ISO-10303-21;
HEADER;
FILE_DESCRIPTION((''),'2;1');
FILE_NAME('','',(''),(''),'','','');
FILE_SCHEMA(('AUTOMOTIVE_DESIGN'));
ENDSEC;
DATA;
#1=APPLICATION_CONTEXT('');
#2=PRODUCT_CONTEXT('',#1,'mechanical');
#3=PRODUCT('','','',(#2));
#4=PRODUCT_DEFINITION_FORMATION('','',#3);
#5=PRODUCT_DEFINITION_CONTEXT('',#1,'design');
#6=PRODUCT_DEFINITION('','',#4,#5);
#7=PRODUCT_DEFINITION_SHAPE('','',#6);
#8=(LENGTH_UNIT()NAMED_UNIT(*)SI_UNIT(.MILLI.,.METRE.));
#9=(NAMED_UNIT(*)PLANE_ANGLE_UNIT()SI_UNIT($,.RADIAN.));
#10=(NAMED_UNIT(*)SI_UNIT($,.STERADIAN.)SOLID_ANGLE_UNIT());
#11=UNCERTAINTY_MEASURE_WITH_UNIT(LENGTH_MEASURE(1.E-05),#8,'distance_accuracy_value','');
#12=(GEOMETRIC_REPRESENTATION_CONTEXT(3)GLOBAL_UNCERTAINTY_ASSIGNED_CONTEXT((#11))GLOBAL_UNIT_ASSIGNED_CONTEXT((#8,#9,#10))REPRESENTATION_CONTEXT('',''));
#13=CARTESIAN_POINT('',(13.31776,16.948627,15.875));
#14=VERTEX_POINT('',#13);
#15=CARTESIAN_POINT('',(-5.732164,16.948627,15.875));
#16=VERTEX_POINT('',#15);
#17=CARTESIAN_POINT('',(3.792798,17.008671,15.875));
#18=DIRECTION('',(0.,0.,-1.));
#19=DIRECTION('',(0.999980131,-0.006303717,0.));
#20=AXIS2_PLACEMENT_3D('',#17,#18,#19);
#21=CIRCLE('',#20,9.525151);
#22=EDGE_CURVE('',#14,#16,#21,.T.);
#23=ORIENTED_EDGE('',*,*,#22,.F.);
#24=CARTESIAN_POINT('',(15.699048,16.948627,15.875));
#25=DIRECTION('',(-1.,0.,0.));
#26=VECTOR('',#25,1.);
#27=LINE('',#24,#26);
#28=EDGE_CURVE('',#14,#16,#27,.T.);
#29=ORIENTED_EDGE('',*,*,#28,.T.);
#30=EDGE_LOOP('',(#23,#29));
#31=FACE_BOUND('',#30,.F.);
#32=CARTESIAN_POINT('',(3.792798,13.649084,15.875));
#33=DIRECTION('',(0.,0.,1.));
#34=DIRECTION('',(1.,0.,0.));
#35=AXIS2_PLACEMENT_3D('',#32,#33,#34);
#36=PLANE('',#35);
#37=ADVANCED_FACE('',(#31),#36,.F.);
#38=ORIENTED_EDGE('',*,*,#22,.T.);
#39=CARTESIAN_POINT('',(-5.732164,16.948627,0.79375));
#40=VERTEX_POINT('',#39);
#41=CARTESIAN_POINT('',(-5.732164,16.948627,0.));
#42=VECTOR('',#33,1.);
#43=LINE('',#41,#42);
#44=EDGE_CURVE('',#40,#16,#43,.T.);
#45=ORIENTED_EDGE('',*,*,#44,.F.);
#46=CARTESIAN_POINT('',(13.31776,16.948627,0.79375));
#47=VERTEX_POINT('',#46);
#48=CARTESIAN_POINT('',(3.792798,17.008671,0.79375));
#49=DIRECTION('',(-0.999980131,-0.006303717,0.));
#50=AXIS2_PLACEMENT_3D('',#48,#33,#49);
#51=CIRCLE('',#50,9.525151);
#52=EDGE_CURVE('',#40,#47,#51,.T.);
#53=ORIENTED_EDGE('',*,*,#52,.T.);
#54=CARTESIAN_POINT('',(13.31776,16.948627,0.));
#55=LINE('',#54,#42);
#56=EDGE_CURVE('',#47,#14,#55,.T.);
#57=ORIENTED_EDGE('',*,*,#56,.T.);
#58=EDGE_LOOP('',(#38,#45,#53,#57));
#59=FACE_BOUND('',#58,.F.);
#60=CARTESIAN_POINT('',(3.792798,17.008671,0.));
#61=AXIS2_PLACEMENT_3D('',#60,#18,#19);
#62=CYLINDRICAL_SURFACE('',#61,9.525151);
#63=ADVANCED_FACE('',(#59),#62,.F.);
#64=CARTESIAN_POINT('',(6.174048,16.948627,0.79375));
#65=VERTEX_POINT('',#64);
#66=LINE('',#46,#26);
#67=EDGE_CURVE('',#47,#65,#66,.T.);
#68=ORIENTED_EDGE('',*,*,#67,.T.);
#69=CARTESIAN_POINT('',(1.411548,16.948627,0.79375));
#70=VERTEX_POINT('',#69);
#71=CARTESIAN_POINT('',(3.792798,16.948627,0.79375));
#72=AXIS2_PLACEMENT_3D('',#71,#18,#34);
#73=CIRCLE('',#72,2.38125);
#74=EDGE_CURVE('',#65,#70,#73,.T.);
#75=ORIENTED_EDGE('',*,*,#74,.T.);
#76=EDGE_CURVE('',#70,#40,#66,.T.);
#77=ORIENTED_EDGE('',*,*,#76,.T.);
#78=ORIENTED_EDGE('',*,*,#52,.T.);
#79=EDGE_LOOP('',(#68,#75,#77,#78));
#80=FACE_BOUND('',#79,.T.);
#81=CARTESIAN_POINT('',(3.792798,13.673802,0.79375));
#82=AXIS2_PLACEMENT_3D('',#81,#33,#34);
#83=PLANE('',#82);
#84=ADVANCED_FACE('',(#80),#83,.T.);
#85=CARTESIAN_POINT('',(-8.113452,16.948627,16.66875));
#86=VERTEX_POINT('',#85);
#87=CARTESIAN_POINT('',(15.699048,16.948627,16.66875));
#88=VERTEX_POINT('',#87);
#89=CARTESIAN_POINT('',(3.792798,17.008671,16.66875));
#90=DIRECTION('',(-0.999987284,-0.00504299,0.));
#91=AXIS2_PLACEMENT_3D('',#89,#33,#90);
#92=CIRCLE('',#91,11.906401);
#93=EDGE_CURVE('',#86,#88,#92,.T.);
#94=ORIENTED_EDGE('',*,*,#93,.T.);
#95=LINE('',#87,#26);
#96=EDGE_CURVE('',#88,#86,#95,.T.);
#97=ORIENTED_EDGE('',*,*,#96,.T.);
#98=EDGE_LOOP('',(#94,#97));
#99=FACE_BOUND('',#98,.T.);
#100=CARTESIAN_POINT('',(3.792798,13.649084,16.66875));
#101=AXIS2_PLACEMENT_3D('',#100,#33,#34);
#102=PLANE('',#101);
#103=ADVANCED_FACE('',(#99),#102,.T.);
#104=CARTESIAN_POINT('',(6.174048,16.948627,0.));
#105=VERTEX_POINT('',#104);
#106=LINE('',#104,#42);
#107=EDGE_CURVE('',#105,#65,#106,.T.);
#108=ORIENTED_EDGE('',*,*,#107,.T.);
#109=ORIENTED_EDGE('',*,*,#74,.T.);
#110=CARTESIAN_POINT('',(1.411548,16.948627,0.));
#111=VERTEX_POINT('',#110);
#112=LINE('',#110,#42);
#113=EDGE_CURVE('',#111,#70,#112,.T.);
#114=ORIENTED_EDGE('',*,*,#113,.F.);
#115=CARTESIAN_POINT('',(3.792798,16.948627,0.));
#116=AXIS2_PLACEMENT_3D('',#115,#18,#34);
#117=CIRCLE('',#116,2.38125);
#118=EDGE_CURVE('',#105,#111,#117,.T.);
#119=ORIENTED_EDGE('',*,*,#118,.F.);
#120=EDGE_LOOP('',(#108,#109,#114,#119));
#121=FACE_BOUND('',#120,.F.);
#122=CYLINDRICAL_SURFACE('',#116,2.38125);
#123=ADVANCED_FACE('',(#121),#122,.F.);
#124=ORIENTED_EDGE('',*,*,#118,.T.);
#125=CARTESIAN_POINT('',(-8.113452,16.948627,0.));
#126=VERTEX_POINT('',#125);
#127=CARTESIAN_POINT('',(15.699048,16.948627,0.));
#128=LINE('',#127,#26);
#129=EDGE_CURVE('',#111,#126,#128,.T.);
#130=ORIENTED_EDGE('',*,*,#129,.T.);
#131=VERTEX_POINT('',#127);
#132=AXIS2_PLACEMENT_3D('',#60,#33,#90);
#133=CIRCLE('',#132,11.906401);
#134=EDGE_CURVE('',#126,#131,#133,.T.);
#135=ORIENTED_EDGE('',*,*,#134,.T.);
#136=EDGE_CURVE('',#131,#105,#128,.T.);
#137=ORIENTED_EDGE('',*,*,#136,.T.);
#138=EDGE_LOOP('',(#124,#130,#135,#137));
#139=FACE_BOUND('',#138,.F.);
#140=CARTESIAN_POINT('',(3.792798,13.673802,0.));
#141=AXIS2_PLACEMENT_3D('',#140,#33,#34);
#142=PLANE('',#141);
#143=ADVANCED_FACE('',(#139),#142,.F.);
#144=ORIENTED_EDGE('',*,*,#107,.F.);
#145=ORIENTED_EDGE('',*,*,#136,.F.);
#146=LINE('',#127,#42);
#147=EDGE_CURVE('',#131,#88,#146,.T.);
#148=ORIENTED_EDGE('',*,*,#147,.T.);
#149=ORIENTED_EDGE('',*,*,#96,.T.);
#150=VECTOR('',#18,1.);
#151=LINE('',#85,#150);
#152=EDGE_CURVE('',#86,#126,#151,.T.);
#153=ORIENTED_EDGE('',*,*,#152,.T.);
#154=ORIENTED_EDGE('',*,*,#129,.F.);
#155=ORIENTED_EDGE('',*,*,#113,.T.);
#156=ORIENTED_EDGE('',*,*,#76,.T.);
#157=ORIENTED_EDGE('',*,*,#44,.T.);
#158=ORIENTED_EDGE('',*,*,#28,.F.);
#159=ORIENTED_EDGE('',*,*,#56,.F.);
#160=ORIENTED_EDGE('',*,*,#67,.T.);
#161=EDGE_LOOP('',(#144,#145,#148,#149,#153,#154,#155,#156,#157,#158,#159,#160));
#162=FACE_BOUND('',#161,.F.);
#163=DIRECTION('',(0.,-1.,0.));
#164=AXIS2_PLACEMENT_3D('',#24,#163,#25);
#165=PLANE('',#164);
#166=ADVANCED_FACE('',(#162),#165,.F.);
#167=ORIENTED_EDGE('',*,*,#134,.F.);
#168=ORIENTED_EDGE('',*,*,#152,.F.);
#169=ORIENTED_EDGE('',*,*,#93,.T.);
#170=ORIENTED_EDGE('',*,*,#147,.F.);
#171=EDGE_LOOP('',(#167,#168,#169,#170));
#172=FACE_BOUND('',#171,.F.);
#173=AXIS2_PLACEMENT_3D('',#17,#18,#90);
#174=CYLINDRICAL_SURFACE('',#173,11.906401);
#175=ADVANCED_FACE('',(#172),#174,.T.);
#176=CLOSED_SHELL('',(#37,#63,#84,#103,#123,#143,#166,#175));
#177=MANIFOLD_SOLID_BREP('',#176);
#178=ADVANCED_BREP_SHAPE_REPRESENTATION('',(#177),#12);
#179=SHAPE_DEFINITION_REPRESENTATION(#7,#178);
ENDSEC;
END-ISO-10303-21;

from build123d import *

# Parameters (mm, degrees)
F1_DEPTH = 15.875
F2_DEPTH = 0.79375
F4_DEPTH = 0.79375
F6_DEPTH = 5.08


# Not quite as in the source:
# - a length typed as a fraction of an inch, garbled in the dataset ("3 / 203.2 mm" for 3/8 in), is restored


with BuildPart() as f1:
    # F0 (on Top) → F1 (new body)
    with BuildSketch(Plane.XY):
        with BuildLine():
            Line((-5.732164003, 16.9486273388), (-8.1134518534, 16.9486273388))
            ThreePointArc((-8.1134518534, 16.9486273388), (3.7927981466, 5.1022697967), (15.6990481466, 16.9486273388))
            Line((15.6990481466, 16.9486273388), (13.3177602962, 16.9486273388))
            ThreePointArc((13.3177602962, 16.9486273388), (3.7927981466, 7.4835197967), (-5.732164003, 16.9486273388))
        make_face()
    extrude(amount=F1_DEPTH)

    # F0 (on Top) → F2 (join)
    with BuildSketch(Plane.XY):
        with BuildLine():
            Line((13.3177602962, 16.9486273388), (-5.732164003, 16.9486273388))
            ThreePointArc((-5.732164003, 16.9486273388), (3.7927981466, 7.4835197967), (13.3177602962, 16.9486273388))
        make_face()
    extrude(amount=F2_DEPTH)

    # F3 (on face) → F4 (join)
    with BuildSketch(Plane.XY.offset(15.875)):
        with BuildLine():
            Line((13.3177602962, 16.9486273388), (-5.732164003, 16.9486273388))
            ThreePointArc((-5.732164003, 16.9486273388), (3.7927981466, 7.4236651892), (13.3177602962, 16.9486273388))
        make_face()
        with BuildLine():
            ThreePointArc((13.3177602962, 16.9486273388), (3.7927981466, 7.4236651892), (-5.732164003, 16.9486273388))
            Line((-5.732164003, 16.9486273388), (-8.1134518534, 16.9486273388))
            ThreePointArc((-8.1134518534, 16.9486273388), (3.7927981466, 5.1022697967), (15.6990481466, 16.9486273388))
            Line((15.6990481466, 16.9486273388), (13.3177602962, 16.9486273388))
        make_face()
    extrude(amount=F4_DEPTH)

    # F5 (on face) → F6 (cut)
    with BuildSketch(Plane(origin=(0, 0, 0), x_dir=(1, 0, 0), z_dir=(0, 0, -1))):
        with BuildLine():
            ThreePointArc((6.1740481466, -16.9486273388), (3.7927981466, -14.5673773388), (1.4115481466, -16.9486273388))
            Line((1.4115481466, -16.9486273388), (6.1740481466, -16.9486273388))
        make_face()
    extrude(amount=-F6_DEPTH, mode=Mode.SUBTRACT)


solid = f1.part
